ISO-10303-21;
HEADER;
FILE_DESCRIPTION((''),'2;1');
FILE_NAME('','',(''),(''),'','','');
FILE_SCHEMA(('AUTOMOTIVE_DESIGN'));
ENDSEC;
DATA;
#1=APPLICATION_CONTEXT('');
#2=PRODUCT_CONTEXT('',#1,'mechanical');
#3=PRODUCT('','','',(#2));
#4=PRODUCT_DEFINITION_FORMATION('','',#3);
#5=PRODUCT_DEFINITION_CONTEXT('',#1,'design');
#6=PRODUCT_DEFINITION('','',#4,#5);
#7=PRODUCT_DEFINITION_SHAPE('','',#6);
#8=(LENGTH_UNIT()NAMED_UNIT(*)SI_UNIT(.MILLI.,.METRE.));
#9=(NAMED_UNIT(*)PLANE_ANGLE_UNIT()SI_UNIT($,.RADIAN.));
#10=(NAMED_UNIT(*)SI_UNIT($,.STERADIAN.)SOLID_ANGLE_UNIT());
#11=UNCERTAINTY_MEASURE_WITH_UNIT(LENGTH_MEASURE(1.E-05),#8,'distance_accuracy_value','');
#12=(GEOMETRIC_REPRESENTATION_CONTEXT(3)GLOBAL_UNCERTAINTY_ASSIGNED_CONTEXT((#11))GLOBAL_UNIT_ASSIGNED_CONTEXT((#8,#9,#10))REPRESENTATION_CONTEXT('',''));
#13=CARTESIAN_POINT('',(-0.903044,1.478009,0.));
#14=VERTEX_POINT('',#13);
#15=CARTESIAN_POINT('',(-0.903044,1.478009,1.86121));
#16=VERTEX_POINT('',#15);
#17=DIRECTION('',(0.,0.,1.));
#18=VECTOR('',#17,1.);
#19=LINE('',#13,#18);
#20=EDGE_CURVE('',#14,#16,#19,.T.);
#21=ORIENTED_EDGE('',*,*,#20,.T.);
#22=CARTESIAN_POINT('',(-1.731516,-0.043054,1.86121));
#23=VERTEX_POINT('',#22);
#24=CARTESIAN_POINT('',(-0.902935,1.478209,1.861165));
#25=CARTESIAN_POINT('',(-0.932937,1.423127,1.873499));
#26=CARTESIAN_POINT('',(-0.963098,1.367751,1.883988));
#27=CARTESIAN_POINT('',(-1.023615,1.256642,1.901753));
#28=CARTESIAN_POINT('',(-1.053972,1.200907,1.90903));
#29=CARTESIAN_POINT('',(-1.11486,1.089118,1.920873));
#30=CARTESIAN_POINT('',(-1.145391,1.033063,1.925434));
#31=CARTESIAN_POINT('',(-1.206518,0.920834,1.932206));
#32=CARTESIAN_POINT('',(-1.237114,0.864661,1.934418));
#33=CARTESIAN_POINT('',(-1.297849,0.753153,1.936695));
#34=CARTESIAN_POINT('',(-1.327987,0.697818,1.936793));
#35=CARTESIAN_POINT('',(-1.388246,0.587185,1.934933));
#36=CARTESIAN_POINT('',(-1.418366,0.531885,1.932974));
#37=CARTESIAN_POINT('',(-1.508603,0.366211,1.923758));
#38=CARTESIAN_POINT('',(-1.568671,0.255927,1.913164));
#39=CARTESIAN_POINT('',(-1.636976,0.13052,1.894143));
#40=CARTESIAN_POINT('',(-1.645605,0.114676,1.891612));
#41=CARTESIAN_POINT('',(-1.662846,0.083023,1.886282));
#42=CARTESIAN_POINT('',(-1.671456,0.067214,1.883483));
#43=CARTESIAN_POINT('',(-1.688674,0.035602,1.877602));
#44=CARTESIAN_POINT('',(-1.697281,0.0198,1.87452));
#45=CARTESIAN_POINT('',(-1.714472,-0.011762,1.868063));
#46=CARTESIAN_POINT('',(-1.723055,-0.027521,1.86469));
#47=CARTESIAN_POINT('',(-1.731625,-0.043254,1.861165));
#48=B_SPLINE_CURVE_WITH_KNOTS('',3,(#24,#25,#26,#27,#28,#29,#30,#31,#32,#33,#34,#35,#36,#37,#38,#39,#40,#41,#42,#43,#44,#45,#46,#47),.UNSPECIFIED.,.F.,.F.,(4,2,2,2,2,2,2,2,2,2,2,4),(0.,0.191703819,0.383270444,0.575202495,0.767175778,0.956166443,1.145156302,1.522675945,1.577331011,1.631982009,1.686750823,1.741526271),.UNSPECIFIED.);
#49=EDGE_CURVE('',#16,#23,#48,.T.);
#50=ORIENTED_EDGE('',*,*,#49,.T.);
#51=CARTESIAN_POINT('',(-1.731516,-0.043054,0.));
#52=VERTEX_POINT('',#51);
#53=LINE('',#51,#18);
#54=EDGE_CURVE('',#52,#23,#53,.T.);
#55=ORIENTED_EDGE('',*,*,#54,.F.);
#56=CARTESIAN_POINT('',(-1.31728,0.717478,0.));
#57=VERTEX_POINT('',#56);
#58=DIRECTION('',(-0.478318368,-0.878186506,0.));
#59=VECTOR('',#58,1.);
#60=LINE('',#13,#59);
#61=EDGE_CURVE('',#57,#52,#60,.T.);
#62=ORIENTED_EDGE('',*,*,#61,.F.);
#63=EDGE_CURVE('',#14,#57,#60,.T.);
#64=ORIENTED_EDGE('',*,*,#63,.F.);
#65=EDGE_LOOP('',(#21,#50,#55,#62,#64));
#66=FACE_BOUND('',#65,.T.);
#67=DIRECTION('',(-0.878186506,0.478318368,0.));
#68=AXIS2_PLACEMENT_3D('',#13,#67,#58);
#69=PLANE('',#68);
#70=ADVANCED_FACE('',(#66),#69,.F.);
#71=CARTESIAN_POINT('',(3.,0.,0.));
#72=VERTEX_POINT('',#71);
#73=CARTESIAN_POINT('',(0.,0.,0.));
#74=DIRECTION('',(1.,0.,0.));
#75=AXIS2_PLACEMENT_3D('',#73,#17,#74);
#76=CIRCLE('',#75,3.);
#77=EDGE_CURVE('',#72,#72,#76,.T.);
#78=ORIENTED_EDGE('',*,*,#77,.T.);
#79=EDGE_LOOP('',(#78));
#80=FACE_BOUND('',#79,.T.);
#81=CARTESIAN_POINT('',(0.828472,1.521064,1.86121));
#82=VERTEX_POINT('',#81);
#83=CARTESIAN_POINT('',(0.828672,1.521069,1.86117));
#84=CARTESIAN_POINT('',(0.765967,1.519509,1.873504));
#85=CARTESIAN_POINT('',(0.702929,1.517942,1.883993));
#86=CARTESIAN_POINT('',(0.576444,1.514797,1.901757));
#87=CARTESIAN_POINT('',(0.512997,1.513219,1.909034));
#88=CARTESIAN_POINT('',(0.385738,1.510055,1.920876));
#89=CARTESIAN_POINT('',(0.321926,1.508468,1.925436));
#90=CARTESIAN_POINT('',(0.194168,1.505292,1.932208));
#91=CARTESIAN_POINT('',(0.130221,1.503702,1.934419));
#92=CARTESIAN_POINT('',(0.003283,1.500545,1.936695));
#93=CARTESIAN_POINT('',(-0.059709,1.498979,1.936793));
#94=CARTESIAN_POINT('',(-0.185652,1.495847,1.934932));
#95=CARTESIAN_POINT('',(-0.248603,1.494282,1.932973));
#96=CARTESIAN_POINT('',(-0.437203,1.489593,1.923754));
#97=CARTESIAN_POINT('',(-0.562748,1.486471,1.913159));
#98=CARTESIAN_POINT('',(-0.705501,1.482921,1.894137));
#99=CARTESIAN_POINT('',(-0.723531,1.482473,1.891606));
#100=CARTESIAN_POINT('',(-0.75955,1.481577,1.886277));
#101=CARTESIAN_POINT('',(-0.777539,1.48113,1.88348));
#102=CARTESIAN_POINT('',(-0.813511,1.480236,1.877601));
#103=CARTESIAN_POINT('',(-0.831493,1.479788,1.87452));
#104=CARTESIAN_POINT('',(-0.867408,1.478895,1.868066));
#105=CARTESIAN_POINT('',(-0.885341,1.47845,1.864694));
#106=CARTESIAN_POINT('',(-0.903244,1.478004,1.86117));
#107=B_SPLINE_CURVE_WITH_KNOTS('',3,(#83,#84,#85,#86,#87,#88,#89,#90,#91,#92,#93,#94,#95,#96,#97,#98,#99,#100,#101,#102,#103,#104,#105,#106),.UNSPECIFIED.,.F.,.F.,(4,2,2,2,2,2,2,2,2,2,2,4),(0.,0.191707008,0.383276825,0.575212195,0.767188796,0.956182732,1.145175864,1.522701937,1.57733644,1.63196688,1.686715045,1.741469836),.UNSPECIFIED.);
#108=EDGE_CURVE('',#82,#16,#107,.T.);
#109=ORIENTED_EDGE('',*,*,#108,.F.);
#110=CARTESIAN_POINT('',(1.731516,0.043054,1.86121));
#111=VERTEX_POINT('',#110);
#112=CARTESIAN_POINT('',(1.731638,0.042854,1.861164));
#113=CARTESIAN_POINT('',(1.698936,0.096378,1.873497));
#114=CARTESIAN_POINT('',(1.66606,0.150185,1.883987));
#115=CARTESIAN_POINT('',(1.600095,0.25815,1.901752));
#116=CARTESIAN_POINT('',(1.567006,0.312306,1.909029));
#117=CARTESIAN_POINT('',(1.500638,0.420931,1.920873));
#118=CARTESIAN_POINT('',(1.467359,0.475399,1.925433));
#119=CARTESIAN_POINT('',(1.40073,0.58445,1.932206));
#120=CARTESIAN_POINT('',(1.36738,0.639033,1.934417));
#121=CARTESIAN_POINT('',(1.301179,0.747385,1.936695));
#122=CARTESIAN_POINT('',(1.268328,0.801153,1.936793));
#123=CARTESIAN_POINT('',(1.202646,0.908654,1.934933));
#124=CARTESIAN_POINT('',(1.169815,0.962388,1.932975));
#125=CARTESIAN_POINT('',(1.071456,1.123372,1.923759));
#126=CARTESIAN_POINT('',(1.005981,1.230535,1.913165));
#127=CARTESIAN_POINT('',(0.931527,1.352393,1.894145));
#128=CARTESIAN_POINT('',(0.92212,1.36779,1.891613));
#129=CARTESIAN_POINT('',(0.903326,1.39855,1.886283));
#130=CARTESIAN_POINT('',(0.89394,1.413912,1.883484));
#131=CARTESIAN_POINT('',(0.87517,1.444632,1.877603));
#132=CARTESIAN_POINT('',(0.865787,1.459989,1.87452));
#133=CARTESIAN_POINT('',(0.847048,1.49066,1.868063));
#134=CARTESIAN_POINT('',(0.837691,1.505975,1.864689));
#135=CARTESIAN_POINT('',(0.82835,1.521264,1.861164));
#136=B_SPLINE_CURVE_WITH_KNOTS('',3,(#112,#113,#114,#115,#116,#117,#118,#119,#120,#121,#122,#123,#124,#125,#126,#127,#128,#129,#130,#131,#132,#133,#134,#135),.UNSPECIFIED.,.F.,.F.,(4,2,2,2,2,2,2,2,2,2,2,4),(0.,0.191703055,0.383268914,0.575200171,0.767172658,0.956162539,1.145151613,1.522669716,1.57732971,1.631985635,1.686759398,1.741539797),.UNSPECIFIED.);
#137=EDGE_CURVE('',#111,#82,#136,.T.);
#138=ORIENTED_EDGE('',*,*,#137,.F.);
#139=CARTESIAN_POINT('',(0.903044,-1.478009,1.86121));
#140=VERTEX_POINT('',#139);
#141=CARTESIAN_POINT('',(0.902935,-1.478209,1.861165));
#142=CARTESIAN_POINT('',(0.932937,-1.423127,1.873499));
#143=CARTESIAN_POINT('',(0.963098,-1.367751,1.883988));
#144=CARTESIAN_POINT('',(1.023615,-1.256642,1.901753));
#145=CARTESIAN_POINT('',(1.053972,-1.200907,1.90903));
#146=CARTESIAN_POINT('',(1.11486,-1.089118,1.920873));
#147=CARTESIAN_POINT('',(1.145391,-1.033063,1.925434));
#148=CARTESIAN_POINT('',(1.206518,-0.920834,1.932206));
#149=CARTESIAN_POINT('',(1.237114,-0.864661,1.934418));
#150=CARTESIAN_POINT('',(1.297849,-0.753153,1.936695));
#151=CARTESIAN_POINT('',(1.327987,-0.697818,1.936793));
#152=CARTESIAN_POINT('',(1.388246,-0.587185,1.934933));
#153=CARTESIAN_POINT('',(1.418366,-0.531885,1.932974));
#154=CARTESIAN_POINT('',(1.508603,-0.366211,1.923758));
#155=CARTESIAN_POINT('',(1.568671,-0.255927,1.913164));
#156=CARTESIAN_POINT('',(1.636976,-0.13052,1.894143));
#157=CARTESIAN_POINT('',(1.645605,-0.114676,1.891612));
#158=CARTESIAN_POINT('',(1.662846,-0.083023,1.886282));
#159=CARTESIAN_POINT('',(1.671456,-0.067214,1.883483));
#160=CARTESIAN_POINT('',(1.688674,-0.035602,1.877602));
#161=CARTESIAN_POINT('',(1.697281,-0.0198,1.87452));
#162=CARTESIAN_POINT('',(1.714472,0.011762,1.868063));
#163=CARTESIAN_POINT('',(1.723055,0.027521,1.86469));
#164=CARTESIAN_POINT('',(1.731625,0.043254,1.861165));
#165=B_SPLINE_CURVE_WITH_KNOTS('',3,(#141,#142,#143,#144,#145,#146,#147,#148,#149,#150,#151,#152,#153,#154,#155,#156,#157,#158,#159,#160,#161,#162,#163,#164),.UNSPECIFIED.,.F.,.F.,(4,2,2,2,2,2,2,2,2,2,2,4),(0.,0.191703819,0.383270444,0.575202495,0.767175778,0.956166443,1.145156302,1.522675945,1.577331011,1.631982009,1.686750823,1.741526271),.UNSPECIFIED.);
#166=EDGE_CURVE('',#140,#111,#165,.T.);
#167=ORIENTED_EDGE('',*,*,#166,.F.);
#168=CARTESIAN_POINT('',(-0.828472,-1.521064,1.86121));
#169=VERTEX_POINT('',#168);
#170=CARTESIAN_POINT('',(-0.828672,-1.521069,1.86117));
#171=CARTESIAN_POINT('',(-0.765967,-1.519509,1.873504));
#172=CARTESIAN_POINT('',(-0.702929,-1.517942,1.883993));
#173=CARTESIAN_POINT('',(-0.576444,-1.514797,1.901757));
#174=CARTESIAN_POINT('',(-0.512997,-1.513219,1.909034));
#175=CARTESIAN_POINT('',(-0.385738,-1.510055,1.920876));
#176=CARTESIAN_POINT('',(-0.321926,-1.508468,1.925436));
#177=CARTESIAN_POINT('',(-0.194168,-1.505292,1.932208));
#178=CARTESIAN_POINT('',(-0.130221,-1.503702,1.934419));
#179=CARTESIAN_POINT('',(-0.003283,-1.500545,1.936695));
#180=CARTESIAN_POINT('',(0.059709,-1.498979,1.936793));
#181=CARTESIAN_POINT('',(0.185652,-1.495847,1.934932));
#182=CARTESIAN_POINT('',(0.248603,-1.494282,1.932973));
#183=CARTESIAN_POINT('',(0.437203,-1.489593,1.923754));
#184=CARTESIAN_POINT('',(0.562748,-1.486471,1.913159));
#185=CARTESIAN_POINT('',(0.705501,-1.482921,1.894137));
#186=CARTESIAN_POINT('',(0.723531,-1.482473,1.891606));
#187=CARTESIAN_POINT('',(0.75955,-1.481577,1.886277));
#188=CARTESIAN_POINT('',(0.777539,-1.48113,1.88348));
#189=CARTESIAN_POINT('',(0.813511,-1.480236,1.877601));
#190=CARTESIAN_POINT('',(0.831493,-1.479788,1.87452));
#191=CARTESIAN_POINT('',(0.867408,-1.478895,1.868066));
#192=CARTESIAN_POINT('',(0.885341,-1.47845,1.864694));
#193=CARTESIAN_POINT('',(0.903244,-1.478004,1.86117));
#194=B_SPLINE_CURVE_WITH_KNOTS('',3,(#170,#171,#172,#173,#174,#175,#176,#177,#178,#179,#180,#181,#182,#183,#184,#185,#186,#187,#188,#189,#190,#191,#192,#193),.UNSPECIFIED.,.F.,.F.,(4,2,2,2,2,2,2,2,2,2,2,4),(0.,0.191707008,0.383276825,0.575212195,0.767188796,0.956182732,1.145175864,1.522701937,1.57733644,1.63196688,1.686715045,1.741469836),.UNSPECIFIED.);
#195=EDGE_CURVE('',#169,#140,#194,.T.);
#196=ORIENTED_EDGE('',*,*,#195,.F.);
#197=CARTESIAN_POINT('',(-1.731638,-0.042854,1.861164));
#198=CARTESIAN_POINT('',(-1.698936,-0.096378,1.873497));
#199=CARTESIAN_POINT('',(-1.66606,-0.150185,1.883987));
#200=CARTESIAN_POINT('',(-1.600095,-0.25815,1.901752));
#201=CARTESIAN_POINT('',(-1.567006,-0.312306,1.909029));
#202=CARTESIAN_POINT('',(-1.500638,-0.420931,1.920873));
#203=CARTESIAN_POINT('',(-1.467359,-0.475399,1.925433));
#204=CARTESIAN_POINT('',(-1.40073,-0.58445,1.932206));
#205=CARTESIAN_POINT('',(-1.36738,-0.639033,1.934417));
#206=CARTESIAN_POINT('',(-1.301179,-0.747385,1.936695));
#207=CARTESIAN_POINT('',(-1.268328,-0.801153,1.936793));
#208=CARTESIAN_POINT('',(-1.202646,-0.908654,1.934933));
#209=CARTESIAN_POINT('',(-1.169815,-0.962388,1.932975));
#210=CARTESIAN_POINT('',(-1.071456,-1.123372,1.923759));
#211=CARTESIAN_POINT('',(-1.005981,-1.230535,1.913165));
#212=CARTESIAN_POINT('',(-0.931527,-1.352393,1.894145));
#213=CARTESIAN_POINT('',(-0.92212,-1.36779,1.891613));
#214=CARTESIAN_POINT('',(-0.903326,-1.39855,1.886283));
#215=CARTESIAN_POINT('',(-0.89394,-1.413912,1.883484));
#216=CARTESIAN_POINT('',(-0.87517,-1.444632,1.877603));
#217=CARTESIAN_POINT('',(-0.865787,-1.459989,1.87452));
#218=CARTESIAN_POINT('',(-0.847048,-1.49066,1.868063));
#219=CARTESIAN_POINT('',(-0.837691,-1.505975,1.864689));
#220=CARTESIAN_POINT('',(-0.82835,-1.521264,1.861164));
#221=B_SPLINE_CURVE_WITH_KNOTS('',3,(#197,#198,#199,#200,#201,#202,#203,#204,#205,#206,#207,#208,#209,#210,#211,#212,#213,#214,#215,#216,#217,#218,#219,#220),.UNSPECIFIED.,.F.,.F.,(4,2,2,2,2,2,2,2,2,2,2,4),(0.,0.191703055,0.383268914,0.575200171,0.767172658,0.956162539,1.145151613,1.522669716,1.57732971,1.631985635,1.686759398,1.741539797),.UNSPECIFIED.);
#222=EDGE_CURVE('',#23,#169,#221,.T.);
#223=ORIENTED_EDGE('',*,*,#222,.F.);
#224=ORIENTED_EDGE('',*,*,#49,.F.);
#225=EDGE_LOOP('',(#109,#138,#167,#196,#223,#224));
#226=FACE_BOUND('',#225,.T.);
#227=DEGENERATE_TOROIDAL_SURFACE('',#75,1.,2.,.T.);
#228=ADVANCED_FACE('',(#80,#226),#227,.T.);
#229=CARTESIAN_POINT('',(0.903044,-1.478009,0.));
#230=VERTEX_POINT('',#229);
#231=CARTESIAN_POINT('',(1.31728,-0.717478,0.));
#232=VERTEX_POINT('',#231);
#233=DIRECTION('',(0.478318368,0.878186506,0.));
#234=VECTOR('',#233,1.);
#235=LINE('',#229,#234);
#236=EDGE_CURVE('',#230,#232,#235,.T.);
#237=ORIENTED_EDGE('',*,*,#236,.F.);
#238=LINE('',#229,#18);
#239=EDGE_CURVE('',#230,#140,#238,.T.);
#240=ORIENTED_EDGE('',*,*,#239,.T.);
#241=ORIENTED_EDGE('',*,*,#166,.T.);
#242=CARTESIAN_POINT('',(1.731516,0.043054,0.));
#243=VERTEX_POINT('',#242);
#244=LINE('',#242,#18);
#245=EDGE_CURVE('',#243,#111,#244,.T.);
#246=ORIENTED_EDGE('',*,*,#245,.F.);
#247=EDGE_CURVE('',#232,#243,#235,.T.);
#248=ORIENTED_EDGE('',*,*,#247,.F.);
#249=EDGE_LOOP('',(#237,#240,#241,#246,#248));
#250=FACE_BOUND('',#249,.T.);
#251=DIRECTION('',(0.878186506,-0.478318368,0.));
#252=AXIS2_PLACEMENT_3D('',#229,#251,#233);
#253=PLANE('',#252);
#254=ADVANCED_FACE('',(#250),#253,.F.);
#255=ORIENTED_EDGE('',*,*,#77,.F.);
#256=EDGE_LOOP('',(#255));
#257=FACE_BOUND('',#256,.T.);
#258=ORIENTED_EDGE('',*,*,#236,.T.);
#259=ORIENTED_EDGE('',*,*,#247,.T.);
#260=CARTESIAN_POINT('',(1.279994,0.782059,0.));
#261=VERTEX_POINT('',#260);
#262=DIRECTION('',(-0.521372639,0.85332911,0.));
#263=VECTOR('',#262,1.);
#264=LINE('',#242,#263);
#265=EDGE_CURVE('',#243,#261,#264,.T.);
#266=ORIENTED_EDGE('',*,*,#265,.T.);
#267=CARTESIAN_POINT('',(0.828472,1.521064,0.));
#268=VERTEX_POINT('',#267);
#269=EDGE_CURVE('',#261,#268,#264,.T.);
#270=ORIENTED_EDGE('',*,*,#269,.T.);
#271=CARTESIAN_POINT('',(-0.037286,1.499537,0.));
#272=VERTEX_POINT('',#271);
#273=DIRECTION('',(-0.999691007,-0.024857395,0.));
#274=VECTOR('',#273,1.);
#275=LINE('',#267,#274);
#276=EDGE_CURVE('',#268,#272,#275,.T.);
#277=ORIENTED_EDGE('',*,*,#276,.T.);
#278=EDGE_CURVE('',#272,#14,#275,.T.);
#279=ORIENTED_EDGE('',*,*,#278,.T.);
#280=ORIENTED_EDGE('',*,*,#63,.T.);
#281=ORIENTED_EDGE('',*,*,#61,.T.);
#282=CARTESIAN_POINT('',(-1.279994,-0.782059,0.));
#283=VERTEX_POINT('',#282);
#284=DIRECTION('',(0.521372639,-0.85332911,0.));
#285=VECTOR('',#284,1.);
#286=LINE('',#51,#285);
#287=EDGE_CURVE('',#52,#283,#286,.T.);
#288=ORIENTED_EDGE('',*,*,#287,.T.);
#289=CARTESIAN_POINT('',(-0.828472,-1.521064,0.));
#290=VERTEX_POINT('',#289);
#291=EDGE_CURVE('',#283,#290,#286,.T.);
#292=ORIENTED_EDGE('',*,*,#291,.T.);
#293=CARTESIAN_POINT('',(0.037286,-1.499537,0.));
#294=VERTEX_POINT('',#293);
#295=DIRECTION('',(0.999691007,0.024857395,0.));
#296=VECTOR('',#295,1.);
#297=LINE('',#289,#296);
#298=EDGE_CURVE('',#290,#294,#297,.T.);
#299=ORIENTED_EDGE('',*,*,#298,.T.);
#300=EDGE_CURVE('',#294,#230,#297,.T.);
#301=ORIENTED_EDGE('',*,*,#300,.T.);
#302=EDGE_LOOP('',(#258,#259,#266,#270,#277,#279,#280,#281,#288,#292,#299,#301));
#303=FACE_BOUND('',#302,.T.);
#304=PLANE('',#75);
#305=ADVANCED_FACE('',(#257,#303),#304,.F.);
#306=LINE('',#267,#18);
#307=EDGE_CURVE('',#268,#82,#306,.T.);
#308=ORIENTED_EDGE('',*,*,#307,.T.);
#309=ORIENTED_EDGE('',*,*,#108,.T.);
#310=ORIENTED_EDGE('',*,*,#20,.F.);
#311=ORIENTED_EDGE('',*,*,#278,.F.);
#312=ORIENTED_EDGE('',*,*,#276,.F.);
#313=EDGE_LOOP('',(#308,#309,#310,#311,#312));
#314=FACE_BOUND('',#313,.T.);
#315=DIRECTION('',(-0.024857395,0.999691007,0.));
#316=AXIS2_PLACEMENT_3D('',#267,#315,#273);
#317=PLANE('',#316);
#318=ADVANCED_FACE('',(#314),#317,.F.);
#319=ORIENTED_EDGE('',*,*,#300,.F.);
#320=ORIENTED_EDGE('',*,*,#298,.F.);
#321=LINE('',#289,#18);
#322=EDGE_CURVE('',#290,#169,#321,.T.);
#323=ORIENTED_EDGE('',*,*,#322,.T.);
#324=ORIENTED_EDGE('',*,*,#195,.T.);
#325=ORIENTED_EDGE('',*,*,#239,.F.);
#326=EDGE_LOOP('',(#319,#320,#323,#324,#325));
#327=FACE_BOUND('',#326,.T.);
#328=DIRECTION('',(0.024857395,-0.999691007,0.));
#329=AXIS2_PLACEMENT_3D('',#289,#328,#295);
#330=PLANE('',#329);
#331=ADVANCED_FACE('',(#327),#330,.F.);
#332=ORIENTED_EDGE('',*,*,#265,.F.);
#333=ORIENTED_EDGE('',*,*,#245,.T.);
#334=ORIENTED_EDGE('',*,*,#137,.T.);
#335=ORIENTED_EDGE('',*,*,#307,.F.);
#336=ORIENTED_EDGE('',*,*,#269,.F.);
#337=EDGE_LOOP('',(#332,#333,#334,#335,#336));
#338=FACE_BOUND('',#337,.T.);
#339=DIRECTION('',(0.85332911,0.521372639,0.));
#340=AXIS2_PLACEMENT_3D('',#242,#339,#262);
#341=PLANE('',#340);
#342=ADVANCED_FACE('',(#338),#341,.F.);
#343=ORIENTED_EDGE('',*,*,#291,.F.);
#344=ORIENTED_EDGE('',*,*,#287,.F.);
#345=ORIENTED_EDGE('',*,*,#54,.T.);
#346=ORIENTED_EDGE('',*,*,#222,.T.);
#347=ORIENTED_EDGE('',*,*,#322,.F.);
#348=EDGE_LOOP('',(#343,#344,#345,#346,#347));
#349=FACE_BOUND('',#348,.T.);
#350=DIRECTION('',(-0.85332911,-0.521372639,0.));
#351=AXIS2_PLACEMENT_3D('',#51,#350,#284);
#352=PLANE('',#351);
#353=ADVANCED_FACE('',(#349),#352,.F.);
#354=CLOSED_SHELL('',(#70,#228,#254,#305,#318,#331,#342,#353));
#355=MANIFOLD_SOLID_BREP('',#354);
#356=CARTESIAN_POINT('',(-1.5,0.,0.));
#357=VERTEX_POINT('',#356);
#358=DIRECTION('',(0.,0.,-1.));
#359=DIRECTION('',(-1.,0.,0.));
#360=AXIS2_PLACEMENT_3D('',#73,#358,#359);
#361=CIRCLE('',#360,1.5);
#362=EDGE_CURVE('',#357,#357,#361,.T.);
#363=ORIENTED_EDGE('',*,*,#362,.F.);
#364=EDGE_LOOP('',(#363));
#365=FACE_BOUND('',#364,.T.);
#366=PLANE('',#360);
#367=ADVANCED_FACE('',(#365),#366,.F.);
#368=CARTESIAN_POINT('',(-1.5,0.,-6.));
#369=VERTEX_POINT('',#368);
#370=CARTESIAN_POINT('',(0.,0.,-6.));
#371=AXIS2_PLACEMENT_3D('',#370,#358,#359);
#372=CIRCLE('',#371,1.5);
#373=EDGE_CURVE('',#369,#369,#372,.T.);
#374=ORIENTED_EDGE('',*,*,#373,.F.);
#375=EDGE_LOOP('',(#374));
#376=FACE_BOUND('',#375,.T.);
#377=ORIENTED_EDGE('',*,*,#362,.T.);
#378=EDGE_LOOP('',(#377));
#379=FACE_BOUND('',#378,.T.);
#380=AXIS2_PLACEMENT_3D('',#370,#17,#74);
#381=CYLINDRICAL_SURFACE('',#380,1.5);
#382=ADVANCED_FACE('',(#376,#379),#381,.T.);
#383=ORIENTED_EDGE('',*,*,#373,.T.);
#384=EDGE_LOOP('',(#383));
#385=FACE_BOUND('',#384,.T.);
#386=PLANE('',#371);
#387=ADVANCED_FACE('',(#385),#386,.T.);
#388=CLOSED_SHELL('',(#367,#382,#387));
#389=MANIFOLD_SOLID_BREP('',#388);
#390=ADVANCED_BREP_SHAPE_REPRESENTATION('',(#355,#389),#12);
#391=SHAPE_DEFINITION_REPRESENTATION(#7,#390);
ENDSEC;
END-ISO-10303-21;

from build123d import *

# Parameters (mm, degrees)
SKETCH1_R           = 3
BOSS_EXTRUDE1_DEPTH = 2
FILLET1_R           = 2
CUT_EXTRUDE1_DEPTH  = 2
SKETCH3_R           = 1.5
BOSS_EXTRUDE2_DEPTH = 6


with BuildPart() as part:
    # Sketch1 → Boss-Extrude1 (new body)
    with BuildSketch(Plane.XY):
        Circle(SKETCH1_R)
    extrude(amount=BOSS_EXTRUDE1_DEPTH)

    # Fillet1
    fillet1_edges = [part.edges().sort_by_distance(p)[0] for p in [
        (-3, 0, 2),
    ]]
    fillet(fillet1_edges, radius=FILLET1_R - 0.0001)  # a hair under: the kernel refuses the full size

    # Sketch2 → Cut-Extrude1 (cut)
    with BuildSketch(Plane.XY.offset(2)):
        Polygon((0.903043901, -1.478009375), (1.731515616, 0.043054272), (0.828471715, 1.521063647), (-0.903043901, 1.478009375), (-1.731515616, -0.043054272), (-0.828471715, -1.521063647), align=None)
    extrude(amount=-CUT_EXTRUDE1_DEPTH, mode=Mode.SUBTRACT)


with BuildPart() as body_2:
    # Sketch3 → Boss-Extrude2 (new body)
    with BuildSketch(Plane(origin=(0, 0, 0), x_dir=(-1, 0, 0), z_dir=(0, 0, -1))):
        Circle(SKETCH3_R)
    extrude(amount=BOSS_EXTRUDE2_DEPTH)


solid = Compound([part.part, body_2.part])
